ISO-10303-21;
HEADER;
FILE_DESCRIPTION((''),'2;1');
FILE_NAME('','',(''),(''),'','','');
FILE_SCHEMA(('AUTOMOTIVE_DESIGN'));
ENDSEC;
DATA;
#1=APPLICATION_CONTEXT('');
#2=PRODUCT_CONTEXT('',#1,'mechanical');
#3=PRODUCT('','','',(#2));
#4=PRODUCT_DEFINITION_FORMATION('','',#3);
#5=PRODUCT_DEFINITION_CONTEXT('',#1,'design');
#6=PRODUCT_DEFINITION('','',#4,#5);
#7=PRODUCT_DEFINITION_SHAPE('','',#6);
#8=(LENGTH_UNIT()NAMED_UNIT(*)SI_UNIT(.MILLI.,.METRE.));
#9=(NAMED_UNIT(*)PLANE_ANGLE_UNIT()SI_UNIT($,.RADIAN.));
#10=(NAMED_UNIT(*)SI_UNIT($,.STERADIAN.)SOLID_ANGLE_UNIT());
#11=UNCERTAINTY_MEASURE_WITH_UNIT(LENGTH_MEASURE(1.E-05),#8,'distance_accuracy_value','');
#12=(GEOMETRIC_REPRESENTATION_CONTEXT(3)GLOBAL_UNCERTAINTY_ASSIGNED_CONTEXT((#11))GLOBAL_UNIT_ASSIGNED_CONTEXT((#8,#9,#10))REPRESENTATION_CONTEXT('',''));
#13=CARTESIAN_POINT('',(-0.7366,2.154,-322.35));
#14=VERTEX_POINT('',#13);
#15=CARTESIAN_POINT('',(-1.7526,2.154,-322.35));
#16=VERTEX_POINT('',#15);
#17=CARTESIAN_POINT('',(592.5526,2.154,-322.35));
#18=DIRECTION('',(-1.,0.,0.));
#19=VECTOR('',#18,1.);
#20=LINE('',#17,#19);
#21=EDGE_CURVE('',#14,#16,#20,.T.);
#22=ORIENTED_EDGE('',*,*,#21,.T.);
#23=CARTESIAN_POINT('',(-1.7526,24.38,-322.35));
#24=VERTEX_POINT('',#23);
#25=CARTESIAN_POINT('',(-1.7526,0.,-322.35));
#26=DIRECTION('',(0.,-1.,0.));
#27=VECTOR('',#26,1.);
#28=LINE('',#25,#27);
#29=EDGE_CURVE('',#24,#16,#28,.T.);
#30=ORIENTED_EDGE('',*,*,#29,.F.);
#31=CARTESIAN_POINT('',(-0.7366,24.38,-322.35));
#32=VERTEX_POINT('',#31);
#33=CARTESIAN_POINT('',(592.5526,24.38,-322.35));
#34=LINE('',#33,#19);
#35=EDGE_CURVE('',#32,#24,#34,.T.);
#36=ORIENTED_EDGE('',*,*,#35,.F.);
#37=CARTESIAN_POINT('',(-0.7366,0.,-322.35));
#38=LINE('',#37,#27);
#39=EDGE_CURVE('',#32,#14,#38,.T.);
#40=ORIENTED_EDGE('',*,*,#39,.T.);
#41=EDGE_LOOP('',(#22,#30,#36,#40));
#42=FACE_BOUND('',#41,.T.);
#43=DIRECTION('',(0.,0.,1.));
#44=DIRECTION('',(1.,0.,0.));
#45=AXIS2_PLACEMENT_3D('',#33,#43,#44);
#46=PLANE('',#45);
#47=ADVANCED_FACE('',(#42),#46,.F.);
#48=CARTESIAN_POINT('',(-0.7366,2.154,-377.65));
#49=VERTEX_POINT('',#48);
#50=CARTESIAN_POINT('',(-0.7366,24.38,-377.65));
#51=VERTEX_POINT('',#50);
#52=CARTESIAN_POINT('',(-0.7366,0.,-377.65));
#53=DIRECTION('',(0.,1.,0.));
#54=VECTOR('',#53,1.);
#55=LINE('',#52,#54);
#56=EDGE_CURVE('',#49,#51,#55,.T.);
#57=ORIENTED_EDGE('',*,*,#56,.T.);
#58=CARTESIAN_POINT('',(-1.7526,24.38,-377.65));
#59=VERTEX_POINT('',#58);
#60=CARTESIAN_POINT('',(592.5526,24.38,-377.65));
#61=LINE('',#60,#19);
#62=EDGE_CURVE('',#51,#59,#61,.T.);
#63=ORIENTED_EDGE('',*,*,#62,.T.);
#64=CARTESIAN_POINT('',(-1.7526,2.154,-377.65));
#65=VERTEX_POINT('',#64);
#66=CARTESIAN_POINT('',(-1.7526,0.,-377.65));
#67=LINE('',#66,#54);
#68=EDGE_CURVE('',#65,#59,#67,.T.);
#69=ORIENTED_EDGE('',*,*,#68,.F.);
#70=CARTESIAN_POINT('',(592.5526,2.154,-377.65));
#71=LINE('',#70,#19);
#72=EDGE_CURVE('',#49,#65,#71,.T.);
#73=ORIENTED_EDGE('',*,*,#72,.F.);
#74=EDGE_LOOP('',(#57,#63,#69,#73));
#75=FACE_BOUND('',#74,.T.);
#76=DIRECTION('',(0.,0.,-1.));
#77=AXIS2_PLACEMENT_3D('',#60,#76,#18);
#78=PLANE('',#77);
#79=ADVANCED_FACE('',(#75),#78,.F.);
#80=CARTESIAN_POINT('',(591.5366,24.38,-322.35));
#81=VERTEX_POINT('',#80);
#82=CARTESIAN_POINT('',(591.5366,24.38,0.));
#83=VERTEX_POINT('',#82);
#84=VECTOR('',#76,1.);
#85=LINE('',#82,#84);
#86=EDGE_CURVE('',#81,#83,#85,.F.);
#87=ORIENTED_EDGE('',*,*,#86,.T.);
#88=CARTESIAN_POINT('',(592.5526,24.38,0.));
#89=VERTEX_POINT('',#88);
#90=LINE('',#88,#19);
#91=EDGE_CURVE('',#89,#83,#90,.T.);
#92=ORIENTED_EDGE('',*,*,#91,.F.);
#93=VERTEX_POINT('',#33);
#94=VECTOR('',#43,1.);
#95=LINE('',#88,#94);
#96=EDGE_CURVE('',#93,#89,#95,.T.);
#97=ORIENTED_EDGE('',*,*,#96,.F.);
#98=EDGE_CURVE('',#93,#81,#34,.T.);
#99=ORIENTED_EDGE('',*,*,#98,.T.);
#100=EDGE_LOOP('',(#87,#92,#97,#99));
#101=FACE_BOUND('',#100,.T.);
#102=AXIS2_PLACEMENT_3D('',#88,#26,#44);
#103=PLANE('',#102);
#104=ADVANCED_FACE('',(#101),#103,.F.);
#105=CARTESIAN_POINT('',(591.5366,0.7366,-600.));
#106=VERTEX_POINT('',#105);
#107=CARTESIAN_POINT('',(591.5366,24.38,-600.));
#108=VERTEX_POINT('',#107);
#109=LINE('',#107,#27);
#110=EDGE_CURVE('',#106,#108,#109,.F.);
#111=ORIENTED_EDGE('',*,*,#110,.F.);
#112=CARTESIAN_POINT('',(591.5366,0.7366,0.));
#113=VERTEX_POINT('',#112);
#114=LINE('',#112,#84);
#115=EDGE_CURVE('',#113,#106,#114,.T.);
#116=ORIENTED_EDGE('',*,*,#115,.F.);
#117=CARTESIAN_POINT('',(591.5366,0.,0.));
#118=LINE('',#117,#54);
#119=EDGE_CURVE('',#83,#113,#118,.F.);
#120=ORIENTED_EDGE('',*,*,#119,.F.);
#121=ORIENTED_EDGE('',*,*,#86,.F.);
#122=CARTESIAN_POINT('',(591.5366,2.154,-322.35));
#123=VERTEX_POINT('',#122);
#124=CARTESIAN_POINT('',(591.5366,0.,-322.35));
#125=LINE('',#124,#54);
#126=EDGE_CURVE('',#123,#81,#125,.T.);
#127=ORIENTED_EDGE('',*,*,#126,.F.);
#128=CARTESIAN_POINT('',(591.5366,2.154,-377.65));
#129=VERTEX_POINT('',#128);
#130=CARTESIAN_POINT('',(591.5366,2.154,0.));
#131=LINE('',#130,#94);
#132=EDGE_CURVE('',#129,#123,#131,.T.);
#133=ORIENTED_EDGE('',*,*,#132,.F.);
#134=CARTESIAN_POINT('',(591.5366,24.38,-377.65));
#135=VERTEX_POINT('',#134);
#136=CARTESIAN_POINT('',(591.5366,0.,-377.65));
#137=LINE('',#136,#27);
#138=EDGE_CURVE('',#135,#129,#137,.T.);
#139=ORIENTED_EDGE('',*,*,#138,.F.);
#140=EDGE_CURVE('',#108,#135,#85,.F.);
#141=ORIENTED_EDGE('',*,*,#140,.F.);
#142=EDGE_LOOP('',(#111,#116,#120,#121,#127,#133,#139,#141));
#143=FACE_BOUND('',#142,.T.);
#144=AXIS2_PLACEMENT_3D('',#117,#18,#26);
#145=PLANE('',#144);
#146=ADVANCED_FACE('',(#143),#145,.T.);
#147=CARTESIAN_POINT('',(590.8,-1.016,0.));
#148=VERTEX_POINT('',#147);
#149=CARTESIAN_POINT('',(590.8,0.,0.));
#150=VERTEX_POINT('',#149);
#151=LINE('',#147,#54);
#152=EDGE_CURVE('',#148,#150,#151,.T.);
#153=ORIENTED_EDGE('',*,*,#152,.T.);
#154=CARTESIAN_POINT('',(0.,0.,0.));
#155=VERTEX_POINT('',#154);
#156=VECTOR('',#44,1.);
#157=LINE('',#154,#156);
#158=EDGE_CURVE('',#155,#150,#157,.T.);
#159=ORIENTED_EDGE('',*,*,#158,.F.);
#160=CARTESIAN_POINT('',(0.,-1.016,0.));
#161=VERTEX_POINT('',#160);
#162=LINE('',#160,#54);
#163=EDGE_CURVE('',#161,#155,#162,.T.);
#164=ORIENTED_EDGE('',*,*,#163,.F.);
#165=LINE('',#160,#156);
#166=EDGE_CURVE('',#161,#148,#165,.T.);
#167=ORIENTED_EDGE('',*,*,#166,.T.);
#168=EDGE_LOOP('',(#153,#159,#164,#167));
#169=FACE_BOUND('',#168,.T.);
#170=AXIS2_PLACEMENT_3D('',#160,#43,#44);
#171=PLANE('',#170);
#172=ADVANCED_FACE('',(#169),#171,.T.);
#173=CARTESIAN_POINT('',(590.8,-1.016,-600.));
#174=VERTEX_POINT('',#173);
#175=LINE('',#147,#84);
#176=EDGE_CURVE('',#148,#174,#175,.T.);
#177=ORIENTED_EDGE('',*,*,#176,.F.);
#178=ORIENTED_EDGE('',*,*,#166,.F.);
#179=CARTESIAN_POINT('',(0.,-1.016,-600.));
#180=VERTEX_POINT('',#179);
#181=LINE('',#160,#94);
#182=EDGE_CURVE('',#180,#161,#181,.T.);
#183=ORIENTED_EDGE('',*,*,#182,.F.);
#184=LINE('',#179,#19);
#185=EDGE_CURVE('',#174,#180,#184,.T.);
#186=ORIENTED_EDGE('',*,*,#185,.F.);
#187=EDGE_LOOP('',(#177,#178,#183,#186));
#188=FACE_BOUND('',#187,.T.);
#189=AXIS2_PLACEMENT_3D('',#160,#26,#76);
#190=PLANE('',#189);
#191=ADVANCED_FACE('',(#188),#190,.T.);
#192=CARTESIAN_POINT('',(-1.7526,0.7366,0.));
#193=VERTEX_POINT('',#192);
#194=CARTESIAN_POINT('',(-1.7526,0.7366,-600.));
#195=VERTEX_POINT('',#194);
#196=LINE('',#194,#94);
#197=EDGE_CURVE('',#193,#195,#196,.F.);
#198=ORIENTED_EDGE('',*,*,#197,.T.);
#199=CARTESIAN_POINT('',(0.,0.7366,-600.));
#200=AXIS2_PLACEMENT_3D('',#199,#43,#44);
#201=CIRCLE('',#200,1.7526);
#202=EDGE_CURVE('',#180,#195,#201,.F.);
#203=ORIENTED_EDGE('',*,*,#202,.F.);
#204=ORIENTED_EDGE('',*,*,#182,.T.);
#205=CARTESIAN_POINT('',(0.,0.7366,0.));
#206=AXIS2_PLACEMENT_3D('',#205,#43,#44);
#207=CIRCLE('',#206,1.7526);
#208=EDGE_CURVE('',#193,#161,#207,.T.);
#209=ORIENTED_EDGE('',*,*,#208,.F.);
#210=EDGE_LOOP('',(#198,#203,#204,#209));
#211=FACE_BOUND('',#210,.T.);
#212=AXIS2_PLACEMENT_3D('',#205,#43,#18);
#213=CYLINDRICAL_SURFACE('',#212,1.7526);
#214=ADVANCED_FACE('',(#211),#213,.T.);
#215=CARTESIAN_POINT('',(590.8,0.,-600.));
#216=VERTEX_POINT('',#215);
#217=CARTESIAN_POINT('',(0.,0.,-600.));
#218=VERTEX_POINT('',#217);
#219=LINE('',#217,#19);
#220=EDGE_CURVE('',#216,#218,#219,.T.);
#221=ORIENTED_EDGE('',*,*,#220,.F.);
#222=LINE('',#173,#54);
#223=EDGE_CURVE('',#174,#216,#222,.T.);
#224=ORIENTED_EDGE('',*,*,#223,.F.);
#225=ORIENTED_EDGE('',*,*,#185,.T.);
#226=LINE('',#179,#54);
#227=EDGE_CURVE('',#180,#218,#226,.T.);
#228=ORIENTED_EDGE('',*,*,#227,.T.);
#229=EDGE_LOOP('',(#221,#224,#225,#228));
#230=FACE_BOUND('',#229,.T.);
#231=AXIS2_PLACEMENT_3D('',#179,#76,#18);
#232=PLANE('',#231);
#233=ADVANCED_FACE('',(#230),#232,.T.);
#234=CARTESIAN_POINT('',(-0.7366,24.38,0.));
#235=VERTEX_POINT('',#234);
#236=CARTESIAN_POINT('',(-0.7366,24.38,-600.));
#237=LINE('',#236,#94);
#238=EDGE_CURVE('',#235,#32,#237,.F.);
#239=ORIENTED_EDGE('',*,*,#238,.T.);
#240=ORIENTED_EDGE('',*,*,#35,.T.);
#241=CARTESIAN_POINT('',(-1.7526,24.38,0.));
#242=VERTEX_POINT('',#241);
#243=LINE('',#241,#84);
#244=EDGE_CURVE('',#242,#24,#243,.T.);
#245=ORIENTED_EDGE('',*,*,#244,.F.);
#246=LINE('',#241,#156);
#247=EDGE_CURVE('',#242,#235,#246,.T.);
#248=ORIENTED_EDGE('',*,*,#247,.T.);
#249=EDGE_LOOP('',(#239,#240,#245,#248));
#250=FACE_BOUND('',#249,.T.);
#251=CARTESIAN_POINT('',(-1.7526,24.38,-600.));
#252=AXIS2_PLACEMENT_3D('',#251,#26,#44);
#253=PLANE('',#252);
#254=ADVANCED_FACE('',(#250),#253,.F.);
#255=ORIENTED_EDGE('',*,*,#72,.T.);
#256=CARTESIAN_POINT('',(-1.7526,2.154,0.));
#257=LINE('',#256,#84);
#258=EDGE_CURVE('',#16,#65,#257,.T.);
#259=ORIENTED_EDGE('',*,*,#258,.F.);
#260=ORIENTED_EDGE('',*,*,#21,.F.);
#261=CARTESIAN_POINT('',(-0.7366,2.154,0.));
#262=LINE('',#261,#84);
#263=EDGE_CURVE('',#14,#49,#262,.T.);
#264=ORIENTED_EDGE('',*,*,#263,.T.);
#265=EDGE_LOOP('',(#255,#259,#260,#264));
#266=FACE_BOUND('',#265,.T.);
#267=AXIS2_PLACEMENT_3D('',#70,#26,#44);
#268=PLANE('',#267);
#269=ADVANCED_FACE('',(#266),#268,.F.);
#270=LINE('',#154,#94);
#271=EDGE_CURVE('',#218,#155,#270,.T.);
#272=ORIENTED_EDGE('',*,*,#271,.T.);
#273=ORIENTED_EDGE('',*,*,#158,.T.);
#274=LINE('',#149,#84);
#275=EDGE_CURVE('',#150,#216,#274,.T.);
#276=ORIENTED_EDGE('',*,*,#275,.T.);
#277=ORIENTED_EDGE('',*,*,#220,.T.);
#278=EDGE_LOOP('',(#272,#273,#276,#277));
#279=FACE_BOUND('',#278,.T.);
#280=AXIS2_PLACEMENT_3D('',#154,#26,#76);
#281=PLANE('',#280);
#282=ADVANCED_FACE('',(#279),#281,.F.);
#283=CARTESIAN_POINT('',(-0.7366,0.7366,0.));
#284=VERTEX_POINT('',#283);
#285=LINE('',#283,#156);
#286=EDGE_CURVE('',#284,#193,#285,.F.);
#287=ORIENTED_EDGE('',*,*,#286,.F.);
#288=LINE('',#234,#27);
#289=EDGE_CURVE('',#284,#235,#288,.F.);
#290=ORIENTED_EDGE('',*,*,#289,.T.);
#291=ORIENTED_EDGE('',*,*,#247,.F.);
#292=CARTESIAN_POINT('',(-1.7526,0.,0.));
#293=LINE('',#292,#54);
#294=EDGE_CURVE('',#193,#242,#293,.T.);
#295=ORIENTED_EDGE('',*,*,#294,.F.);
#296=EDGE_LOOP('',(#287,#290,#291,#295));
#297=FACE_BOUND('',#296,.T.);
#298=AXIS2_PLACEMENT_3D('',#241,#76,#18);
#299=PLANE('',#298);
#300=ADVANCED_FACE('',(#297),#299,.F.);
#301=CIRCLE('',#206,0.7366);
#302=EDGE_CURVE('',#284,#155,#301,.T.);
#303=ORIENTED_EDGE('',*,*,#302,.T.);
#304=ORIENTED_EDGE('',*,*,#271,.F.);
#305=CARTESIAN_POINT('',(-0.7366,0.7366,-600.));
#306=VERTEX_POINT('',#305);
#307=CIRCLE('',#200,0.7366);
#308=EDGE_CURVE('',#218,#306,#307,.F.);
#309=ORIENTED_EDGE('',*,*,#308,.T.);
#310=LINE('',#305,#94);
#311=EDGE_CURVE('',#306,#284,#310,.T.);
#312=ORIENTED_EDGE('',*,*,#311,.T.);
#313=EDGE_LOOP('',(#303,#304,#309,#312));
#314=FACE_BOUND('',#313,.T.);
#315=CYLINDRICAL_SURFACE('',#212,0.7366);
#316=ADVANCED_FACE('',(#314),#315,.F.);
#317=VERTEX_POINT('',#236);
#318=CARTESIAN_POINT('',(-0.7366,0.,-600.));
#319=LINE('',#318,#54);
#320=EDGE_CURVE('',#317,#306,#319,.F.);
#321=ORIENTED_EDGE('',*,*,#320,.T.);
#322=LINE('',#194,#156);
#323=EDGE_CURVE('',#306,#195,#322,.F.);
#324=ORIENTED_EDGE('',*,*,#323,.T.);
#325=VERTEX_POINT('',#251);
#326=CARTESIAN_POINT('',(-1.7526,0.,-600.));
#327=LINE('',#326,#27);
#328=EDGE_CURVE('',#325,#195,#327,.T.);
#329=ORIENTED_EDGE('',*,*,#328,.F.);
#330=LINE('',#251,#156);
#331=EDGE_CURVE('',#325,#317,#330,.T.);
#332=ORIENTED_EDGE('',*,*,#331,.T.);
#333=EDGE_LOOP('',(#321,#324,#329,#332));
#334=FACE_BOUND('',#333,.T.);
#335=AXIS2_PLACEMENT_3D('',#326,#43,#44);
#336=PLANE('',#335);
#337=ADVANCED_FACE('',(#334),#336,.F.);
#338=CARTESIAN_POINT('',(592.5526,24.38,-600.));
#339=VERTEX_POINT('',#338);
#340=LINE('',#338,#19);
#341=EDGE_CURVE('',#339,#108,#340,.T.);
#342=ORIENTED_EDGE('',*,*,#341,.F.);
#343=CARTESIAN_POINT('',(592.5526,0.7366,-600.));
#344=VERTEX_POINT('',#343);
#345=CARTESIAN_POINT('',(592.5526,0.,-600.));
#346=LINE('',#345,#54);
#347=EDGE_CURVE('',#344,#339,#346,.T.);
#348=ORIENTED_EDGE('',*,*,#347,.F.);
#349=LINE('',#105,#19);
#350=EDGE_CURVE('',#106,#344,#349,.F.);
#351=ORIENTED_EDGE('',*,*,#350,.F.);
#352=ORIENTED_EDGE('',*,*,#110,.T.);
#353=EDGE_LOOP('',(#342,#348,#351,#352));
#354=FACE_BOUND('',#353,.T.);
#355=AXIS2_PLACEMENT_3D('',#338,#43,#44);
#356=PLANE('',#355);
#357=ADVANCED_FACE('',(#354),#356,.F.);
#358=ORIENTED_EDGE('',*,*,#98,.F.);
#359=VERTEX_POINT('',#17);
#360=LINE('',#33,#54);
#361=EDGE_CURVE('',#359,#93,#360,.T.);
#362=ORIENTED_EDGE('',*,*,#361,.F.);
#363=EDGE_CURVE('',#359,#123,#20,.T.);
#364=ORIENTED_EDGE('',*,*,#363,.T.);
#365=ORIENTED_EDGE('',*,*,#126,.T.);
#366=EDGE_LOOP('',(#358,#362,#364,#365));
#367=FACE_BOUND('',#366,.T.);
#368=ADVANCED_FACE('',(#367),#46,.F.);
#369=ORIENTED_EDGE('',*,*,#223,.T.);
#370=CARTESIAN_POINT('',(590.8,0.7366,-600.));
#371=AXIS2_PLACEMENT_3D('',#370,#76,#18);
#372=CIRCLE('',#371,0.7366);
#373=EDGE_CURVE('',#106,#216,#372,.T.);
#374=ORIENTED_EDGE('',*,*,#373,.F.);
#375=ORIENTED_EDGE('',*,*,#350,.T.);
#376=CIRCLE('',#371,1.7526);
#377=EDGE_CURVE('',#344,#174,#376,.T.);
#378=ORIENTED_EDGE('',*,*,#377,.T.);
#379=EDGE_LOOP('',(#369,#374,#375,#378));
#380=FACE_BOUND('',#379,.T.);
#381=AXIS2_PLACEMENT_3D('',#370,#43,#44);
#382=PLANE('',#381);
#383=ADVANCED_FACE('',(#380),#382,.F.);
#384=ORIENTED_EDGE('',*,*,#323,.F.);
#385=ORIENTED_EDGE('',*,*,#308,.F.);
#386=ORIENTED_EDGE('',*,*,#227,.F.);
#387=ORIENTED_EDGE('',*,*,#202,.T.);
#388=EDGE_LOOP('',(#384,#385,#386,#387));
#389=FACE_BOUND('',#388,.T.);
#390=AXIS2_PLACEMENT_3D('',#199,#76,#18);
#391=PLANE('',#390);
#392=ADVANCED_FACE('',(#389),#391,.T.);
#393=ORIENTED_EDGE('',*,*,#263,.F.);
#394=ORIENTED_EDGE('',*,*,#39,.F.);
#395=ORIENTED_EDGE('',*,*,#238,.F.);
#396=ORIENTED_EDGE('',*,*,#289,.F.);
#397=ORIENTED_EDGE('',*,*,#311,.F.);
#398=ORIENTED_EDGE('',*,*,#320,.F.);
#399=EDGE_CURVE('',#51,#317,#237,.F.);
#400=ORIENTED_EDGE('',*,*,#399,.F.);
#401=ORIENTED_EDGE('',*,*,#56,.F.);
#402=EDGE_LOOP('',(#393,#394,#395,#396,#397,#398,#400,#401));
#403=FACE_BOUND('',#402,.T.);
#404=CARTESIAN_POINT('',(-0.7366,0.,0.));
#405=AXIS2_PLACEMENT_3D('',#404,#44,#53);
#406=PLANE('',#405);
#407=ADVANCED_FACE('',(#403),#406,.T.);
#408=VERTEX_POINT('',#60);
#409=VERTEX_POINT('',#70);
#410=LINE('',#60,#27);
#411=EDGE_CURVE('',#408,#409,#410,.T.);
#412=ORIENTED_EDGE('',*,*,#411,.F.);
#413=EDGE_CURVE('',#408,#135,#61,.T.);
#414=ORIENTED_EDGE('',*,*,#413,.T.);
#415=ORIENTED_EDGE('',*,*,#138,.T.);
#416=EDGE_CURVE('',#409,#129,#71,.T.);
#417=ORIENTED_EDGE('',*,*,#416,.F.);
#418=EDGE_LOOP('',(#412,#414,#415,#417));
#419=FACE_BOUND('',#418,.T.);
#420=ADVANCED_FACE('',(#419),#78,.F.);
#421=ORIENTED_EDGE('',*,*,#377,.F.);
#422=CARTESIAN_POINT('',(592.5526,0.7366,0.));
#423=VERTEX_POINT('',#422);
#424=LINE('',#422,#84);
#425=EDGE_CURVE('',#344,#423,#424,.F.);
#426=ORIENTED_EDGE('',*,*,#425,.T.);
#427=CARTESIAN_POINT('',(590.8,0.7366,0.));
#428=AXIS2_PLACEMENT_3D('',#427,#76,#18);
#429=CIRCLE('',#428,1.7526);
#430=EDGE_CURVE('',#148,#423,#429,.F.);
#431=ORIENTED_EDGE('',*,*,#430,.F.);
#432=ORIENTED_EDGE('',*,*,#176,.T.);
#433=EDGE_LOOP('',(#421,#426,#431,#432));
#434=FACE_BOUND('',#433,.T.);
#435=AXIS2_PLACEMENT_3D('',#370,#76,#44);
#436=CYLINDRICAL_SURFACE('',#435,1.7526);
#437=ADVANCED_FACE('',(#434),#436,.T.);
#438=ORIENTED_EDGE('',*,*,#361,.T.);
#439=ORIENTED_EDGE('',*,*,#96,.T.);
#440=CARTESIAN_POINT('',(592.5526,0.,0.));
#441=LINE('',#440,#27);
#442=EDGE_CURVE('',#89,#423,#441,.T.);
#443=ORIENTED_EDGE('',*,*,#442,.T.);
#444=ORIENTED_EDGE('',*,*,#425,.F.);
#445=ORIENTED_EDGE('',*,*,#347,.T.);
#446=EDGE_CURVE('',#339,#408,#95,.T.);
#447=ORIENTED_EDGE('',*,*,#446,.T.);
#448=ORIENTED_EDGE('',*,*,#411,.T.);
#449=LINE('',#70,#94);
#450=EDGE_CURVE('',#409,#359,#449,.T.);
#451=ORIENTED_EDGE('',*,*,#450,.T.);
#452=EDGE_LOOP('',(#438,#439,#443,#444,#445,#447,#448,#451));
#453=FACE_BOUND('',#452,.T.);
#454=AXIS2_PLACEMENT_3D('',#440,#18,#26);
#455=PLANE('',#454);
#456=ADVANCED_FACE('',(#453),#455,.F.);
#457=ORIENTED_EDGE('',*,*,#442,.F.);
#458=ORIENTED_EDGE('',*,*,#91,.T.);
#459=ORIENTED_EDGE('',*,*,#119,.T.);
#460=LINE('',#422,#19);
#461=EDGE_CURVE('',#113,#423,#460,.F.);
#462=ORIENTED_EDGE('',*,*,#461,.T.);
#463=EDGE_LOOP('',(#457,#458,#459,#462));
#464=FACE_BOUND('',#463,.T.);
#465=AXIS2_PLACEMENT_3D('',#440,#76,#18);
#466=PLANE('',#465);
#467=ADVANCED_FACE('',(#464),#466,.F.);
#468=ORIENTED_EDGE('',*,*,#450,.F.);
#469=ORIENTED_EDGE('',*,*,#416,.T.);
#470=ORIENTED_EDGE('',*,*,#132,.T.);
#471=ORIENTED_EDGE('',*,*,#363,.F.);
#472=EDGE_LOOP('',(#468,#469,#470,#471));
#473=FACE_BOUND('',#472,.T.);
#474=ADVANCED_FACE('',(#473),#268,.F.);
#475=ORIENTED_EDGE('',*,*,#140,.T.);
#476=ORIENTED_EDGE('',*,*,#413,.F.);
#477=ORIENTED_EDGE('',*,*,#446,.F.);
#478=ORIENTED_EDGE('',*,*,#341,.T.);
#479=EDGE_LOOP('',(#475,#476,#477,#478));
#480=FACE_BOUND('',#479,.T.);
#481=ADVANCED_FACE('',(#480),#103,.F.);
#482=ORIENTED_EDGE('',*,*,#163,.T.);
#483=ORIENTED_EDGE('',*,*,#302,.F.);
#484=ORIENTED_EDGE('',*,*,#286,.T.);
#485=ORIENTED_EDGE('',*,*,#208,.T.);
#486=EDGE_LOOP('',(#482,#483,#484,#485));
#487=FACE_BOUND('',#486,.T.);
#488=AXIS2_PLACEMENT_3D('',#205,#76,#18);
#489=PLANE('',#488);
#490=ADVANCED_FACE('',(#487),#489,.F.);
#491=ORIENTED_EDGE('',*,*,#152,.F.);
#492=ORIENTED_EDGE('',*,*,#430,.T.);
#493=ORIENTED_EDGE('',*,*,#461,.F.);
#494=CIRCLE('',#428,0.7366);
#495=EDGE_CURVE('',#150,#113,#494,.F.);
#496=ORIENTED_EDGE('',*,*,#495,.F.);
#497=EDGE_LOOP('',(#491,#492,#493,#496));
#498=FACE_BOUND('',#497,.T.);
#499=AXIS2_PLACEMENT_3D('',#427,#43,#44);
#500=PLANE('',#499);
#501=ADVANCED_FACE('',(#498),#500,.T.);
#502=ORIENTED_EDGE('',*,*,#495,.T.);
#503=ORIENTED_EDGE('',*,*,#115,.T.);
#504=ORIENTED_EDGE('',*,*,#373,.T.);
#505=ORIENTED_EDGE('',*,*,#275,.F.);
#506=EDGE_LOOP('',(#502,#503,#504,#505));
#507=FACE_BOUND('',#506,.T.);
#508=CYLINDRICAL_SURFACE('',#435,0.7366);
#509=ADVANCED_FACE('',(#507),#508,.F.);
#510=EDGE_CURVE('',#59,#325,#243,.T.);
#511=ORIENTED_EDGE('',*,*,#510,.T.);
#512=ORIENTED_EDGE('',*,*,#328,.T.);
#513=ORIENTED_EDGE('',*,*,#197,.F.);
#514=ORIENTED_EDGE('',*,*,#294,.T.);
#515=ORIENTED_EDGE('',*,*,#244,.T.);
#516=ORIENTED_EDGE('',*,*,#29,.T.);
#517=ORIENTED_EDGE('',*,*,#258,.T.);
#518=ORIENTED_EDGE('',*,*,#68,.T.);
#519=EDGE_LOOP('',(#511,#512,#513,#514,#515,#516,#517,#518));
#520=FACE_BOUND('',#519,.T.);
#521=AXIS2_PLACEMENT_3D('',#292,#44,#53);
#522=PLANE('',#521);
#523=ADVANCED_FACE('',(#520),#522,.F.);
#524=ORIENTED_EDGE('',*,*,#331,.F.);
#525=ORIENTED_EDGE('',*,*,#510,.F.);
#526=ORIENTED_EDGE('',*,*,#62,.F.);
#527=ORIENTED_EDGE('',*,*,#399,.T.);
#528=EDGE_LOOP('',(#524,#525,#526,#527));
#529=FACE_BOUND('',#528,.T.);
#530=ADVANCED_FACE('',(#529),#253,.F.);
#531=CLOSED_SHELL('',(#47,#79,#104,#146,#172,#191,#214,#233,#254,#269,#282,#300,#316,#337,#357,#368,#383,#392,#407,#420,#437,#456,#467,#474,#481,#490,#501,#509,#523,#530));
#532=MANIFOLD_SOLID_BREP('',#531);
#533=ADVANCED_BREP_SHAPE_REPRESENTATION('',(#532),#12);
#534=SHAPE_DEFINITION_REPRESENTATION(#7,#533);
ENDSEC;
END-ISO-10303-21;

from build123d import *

# Parameters (mm, degrees)
SKETCH2_W               = 590.8
SKETCH2_H               = 600
BASE_FLANGE1_DEPTH      = 1.016
EDGE_FLANGE1_DEPTH      = 600
EDGE_FLANGE1_BEND_DEPTH = 600
CUT_EXTRUDE1_DEPTH      = 845.862743377
CUT_EXTRUDE1_DEPTH_BACK = 845.862743377
SKETCH31_W              = 55.3
SKETCH31_H              = 22.226


# Sheet-metal steps are written as plain solids
with BuildPart() as part:
    # Sketch2 → Base-Flange1 (new body)
    with BuildSketch(Plane(origin=(0, 0, 0), x_dir=(1, 0, 0), z_dir=(0, 1, 0))):
        with Locations((295.4, 300)):
            Rectangle(SKETCH2_W, SKETCH2_H)
    extrude(amount=-BASE_FLANGE1_DEPTH)

    # Edge-Flange1 section (across the edge) → Edge-Flange1 (add)
    with BuildSketch(Plane(origin=(-0.7366, 0, -600), x_dir=(1, 0, 0), z_dir=(0, 0, 1))):
        with BuildLine():
            Line((-1.016, 0.7366), (-1.016, 24.38))
            Line((-1.016, 24.38), (0, 24.38))
            Line((0, 24.38), (0, 0.7366))
            ThreePointArc((0, 0.7366), (0.215745145, 0.215745145), (0.7366, 0))
            Line((0.7366, 0), (0.7366, -1.016))
            ThreePointArc((0.7366, -1.016), (-0.502675345, -0.502675345), (-1.016, 0.7366))
        make_face()
    extrude(amount=EDGE_FLANGE1_DEPTH)

    # Edge-Flange1 section 2 (across the edge) → Edge-Flange1 bend (add)
    with BuildSketch(Plane(origin=(591.5366, 0, 0), x_dir=(-1, 0, 0), z_dir=(0, 0, -1))):
        with BuildLine():
            Line((-1.016, 0.7366), (-1.016, 24.38))
            Line((-1.016, 24.38), (0, 24.38))
            Line((0, 24.38), (0, 0.7366))
            ThreePointArc((0, 0.7366), (0.215745145, 0.215745145), (0.7366, 0))
            Line((0.7366, 0), (0.7366, -1.016))
            ThreePointArc((0.7366, -1.016), (-0.502675345, -0.502675345), (-1.016, 0.7366))
        make_face()
    extrude(amount=EDGE_FLANGE1_BEND_DEPTH)

    # Sketch31 → Cut-Extrude1 (cut, two sides: drawn at the far end of the back side and taken through both)
    with BuildSketch(Plane.ZY.offset(1.7526).offset(-CUT_EXTRUDE1_DEPTH_BACK)):
        with Locations((-350, 13.267)):
            Rectangle(SKETCH31_W, SKETCH31_H)
    extrude(amount=CUT_EXTRUDE1_DEPTH + CUT_EXTRUDE1_DEPTH_BACK, mode=Mode.SUBTRACT)


solid = part.part
